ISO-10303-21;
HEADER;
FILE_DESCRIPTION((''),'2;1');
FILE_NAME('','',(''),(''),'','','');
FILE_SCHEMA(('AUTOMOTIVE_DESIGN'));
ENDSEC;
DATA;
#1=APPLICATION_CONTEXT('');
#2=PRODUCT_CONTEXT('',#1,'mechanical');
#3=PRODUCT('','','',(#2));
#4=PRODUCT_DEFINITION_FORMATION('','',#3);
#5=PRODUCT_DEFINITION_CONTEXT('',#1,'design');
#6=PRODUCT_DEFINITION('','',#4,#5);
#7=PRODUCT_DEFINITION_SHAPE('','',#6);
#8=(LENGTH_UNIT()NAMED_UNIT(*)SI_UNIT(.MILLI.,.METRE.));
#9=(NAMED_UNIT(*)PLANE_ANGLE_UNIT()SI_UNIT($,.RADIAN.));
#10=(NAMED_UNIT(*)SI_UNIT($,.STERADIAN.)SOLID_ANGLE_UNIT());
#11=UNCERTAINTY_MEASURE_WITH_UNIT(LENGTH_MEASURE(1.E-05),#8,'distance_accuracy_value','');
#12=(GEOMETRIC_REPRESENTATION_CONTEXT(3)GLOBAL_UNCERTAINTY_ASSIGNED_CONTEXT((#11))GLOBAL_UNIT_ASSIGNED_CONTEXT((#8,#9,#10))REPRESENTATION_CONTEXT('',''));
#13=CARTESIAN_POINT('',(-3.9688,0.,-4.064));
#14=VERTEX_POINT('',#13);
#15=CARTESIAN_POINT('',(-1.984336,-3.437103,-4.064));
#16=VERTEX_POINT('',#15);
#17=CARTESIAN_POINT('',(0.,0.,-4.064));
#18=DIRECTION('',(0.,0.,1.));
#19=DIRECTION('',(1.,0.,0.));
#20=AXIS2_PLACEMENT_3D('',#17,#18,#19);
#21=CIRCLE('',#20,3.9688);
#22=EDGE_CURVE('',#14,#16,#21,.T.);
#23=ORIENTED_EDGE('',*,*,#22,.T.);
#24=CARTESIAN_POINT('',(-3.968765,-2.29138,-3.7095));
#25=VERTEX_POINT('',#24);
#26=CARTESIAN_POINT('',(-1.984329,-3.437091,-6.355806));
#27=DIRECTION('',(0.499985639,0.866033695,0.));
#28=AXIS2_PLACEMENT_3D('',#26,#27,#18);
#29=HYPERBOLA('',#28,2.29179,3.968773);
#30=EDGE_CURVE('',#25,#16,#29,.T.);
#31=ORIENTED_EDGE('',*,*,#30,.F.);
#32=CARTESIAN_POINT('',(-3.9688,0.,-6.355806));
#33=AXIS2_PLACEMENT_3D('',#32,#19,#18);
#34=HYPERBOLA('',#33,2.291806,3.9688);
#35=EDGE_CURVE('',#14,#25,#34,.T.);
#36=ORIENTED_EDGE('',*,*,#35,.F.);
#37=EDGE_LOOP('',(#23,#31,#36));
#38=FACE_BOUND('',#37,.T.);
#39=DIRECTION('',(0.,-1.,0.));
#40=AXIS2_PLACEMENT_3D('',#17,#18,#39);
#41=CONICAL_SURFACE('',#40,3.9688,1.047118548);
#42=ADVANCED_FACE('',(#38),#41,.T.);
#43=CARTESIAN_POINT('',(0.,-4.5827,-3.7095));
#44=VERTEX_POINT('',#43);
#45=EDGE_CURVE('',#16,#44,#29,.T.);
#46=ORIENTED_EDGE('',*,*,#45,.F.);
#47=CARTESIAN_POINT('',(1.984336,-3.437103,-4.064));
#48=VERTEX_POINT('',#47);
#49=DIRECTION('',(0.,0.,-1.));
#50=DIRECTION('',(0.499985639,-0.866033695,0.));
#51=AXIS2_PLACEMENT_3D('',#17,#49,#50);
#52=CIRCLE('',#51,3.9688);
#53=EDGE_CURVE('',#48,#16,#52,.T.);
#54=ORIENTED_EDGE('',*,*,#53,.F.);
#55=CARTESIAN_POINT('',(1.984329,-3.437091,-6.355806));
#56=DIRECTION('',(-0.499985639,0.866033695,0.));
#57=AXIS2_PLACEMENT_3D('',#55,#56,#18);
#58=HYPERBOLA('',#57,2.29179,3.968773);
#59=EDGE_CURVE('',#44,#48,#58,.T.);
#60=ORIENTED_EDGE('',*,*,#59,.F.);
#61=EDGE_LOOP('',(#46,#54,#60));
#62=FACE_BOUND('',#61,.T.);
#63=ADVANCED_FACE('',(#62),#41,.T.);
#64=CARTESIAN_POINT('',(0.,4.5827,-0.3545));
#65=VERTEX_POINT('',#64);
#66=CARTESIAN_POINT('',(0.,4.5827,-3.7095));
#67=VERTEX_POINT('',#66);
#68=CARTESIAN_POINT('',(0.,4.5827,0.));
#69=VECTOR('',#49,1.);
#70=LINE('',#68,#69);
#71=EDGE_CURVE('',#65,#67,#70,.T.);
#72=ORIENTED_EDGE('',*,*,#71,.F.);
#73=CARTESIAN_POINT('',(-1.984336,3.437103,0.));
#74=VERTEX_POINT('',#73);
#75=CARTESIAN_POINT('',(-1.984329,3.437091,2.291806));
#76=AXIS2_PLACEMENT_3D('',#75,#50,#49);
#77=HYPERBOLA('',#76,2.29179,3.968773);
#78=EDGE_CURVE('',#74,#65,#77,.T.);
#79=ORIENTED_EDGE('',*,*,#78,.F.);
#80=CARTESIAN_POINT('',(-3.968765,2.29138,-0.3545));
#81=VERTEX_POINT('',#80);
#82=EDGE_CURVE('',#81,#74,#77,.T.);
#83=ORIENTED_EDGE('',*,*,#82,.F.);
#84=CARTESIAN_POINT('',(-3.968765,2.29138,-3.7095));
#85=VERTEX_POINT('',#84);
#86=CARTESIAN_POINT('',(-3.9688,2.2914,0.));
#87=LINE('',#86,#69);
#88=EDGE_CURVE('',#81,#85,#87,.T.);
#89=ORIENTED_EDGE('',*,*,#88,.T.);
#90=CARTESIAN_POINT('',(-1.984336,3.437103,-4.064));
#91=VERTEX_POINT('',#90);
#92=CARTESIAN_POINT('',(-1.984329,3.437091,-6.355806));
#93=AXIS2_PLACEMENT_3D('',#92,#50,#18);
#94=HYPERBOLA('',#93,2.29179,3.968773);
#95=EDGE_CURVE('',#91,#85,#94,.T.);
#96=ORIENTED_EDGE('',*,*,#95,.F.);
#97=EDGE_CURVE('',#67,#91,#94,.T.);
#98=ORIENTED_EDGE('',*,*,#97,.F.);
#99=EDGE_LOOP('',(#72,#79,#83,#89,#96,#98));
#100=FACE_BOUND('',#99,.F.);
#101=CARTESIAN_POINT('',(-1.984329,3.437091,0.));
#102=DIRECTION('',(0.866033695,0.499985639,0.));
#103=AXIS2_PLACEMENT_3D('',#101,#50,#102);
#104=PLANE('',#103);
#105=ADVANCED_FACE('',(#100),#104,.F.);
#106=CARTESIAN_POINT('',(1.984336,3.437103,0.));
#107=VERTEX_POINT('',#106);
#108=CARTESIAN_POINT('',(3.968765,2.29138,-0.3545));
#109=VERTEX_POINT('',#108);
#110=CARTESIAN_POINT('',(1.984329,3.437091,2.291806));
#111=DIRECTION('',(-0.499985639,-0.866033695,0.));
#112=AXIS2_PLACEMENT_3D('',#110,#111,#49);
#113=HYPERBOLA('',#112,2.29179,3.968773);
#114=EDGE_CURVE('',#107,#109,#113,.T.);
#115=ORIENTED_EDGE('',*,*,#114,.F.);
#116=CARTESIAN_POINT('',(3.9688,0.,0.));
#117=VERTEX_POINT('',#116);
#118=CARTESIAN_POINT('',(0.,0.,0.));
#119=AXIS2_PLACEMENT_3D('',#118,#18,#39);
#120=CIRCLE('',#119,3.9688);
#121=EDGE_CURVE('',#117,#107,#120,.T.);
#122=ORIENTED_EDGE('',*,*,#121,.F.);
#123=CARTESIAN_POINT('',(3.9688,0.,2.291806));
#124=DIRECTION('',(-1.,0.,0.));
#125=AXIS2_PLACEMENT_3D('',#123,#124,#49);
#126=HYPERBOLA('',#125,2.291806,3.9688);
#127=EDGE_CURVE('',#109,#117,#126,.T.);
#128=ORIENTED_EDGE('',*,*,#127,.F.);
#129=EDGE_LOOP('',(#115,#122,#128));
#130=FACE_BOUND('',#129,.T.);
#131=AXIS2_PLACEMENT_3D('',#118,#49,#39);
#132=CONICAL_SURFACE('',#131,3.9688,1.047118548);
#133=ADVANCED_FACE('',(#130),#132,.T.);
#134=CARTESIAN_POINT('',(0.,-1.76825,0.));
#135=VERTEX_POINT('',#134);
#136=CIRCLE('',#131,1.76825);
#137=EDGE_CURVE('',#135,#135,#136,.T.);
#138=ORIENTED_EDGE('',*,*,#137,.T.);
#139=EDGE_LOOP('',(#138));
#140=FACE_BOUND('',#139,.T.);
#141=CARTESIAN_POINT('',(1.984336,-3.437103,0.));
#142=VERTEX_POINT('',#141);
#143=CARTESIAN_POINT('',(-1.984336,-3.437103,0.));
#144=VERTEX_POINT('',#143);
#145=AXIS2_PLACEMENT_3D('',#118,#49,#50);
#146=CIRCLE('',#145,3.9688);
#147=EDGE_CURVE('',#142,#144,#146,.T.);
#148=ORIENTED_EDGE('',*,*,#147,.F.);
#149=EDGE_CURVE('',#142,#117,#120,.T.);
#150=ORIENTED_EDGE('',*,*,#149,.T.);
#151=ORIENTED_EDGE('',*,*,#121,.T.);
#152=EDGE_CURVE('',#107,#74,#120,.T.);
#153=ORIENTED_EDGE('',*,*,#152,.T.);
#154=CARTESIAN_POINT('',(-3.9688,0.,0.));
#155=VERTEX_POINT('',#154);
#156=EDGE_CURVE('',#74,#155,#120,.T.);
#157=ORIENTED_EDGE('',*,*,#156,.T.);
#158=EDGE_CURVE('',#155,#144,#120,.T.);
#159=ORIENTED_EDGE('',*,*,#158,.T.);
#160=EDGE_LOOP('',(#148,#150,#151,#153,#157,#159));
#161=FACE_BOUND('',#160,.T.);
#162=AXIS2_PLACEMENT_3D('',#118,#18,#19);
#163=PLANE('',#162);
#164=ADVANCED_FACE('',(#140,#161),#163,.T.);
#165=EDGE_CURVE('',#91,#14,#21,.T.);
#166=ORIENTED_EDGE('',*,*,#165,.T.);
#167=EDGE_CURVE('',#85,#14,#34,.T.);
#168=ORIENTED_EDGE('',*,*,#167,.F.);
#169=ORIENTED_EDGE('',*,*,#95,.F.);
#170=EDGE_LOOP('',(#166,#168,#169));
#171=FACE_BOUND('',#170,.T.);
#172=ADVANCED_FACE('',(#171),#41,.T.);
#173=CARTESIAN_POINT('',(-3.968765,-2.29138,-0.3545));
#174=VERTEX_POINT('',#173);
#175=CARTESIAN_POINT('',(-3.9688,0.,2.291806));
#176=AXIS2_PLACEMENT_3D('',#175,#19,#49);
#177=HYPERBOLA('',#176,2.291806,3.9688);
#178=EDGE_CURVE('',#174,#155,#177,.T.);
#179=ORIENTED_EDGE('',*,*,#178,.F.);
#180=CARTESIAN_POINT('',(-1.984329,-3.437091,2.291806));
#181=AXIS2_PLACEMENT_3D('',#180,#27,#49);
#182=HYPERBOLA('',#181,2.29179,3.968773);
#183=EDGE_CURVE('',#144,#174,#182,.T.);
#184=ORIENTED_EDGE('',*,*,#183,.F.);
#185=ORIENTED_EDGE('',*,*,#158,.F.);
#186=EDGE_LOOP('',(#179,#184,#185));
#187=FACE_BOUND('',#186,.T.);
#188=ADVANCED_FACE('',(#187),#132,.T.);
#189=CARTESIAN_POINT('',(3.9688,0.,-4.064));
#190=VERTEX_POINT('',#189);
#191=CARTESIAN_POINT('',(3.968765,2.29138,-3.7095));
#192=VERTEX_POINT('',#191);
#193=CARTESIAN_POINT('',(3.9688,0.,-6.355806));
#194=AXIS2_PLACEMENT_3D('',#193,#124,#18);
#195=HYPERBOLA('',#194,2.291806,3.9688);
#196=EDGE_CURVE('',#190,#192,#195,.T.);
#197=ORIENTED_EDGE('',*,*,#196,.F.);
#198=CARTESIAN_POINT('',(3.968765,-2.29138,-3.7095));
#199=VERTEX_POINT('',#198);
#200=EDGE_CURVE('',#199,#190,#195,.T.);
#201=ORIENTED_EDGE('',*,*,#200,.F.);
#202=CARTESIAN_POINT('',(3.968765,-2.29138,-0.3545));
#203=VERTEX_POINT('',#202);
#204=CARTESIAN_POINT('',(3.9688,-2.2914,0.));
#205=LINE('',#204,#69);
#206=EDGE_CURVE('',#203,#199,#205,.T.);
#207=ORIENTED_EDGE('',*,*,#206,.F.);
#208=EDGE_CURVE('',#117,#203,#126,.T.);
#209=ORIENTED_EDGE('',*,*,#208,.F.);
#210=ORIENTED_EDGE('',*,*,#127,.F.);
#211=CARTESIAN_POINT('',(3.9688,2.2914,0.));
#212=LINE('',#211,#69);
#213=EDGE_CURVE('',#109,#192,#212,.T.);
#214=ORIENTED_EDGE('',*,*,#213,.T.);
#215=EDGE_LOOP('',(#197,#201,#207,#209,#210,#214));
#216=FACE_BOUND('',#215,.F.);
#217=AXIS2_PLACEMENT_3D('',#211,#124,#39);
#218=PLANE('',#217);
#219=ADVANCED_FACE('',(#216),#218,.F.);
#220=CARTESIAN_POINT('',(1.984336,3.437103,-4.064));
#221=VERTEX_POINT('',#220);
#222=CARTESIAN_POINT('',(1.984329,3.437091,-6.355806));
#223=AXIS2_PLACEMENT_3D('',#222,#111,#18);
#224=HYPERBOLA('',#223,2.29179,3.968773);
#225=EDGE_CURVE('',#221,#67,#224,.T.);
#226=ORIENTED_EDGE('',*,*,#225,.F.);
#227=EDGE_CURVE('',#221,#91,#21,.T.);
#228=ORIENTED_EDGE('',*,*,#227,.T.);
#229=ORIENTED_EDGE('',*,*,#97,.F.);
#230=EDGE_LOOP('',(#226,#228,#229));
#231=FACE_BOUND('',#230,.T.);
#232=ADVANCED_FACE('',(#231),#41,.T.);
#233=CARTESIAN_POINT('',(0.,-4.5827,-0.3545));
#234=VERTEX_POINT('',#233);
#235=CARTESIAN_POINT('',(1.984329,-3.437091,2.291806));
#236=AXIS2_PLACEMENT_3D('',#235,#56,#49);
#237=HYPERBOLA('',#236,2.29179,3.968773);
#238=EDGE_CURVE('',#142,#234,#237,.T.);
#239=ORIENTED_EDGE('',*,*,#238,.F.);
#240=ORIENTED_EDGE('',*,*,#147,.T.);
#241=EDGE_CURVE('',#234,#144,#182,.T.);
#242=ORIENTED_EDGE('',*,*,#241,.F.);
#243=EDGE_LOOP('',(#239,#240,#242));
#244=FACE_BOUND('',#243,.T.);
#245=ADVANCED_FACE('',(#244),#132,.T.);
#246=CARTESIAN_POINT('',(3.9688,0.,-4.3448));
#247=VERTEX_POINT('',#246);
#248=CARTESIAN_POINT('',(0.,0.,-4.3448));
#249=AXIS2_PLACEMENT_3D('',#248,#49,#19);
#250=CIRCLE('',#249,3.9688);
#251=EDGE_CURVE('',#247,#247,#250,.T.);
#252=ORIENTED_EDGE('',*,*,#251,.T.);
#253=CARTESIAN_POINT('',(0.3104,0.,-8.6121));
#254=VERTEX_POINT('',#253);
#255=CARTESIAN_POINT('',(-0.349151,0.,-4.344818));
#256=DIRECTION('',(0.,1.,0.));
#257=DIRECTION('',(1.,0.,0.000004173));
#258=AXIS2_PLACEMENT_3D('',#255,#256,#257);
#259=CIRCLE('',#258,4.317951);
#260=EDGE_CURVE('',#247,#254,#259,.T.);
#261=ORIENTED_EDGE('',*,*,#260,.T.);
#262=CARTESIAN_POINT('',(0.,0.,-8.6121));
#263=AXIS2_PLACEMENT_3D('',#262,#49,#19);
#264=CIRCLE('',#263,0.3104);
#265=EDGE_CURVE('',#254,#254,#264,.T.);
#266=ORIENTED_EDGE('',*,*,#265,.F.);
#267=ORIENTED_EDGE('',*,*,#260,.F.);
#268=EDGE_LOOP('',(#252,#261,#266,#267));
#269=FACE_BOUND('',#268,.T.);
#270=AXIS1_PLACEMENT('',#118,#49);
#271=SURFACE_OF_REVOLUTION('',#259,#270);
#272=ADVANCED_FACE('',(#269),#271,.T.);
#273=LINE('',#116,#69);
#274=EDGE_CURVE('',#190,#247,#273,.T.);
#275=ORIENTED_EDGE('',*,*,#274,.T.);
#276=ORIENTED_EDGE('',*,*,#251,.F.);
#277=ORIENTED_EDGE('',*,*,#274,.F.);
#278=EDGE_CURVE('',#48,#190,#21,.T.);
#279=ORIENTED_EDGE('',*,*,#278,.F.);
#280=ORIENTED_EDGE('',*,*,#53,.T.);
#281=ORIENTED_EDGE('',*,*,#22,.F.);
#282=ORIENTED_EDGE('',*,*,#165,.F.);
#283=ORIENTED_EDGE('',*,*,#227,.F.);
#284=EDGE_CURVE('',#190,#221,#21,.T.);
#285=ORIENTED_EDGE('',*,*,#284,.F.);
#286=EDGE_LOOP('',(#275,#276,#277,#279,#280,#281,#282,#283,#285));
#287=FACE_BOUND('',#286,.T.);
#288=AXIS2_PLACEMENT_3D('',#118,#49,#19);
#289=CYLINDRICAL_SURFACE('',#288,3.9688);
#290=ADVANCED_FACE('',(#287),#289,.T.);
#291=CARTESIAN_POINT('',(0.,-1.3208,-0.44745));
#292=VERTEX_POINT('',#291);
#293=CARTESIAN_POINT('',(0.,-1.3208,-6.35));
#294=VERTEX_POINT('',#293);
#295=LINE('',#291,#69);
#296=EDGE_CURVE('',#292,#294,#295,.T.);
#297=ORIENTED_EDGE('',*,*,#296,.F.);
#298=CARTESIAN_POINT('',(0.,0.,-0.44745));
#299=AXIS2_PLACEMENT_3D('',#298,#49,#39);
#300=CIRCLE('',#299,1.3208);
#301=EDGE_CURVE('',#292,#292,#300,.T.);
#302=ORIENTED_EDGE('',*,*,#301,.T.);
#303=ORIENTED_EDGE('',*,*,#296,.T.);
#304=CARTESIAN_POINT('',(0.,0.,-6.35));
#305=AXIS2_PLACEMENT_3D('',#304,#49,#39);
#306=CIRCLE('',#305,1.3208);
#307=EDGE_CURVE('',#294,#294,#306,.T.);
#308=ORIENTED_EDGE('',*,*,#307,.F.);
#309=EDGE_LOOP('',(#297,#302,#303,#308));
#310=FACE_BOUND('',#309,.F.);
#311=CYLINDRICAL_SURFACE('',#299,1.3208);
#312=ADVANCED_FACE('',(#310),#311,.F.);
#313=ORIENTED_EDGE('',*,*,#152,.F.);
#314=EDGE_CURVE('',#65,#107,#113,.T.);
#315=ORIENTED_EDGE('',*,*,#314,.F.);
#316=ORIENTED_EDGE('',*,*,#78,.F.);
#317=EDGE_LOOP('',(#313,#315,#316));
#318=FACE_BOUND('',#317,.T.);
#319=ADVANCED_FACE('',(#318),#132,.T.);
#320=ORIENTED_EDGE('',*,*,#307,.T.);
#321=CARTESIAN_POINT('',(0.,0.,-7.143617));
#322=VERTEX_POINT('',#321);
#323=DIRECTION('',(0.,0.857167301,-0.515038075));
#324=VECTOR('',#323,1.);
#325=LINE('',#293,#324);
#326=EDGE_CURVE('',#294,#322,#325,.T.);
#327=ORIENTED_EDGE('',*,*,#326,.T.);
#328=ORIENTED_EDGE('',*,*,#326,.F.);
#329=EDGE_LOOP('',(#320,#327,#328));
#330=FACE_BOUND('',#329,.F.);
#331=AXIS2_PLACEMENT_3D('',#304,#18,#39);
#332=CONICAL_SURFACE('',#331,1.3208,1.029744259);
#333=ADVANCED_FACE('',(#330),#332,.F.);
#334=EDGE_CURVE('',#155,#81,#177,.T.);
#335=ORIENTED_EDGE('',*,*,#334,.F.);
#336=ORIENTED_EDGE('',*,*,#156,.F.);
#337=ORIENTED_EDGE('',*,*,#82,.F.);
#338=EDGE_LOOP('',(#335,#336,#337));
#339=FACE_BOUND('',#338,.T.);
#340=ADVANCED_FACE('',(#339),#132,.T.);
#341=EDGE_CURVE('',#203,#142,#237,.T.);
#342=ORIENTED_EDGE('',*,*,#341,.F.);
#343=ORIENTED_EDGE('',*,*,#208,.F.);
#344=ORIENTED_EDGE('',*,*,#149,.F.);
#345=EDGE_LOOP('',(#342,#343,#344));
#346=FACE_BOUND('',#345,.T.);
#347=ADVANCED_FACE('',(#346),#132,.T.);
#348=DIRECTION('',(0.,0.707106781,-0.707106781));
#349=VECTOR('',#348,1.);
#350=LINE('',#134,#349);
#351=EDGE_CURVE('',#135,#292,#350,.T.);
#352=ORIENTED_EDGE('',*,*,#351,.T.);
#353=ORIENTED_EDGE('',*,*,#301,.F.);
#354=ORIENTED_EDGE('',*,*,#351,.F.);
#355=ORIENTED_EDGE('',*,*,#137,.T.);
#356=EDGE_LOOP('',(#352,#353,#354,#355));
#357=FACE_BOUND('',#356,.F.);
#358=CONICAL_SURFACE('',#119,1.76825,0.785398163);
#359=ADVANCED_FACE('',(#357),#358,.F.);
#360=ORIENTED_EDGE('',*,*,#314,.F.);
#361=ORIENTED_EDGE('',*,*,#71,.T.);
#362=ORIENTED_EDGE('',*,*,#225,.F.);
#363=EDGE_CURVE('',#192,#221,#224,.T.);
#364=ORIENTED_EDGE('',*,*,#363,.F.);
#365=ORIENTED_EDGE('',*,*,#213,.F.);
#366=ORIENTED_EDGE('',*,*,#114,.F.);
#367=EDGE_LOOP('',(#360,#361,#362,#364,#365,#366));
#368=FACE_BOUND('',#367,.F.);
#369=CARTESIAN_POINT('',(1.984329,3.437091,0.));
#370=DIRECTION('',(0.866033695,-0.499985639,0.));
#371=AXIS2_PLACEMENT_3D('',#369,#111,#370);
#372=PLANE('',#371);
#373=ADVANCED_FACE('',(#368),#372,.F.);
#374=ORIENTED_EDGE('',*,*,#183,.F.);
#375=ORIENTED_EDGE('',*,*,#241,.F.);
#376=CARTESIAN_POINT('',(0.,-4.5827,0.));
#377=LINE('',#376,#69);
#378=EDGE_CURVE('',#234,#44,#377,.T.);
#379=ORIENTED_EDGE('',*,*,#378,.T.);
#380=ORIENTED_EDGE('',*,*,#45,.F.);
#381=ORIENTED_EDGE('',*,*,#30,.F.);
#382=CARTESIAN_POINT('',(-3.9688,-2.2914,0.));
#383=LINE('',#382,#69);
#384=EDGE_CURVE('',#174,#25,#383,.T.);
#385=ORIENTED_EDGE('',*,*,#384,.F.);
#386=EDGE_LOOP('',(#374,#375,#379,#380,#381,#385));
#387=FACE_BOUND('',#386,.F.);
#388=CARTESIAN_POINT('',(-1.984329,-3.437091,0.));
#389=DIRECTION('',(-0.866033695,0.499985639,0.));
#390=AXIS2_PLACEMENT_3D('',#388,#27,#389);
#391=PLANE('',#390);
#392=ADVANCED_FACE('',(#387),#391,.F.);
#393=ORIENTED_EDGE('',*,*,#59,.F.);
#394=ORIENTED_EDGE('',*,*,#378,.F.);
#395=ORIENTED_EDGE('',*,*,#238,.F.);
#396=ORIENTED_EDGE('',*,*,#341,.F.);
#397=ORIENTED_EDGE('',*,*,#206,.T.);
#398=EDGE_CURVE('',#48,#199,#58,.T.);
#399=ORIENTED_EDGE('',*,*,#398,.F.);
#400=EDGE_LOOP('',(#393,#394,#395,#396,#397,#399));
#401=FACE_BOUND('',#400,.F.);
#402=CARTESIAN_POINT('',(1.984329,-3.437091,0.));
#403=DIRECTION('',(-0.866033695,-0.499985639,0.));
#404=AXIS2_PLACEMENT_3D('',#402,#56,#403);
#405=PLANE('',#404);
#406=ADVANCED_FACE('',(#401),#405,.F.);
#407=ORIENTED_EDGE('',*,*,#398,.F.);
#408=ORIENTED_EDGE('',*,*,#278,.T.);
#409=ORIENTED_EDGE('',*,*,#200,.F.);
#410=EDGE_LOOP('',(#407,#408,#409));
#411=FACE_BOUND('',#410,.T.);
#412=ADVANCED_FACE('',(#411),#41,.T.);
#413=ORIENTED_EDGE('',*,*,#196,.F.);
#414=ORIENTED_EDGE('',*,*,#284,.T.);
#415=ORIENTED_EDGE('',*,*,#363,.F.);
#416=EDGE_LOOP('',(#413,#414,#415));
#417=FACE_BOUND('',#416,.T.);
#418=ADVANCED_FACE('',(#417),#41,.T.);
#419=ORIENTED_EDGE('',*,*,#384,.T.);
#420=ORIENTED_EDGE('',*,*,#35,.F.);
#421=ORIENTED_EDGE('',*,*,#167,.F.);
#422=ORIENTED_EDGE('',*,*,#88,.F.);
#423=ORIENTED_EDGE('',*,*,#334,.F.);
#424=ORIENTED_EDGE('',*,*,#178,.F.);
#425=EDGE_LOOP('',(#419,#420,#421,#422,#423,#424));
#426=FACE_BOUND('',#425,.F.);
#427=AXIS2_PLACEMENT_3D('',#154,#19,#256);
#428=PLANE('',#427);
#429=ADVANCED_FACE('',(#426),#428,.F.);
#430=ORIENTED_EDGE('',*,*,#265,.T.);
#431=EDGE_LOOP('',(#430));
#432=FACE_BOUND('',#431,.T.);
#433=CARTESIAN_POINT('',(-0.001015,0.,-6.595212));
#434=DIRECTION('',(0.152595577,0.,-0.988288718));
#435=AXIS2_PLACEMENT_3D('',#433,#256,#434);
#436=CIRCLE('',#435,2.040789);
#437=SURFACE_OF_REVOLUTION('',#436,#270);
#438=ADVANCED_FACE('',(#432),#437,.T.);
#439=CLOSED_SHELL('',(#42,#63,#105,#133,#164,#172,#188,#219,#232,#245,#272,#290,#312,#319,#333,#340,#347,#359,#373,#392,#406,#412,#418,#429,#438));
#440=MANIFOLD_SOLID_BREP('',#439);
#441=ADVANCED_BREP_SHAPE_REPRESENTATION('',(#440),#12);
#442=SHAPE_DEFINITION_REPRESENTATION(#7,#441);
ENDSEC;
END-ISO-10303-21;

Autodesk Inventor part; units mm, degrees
ref_plane "YZ Plane" through (0, 0, 0) normal (1, 0, 0) x (0, 1, 0)
sketch "Sketch2" plane through (0, 0, 0) normal (0, 1, 0) x (-1, 0, 0)
  line L0 (0, 0) -> (-3.9688, 0)
  line L1 (-3.9688, 0) -> (-3.9688, -4.3448)
  arc A0 (-3.9688, -4.3448) -> (-0.3104, -8.6121) centre (0.3492, -4.3448) ccw
  arc A1 (-0.3104, -8.6121) -> (0, -8.636) centre (0, -6.604) ccw
  line L2 (0, 0) -> (0, -8.636)
  line L3 (0, 0) -> (0, -8.636)
  dimension "d1" = 8.636
  dimension "d3" = 3.9688
  dimension "d5" = 0
  dimension "d7" = 2.032
  dimension "d9" = 4.318
revolve "Revolution1" add sketch "Sketch2" angle 360 about axis through (0, 0, 0) along (0, 0, -1)
sketch "Sketch7" plane through (0, 0, 0) normal (0, 0, 1) x (1, 0, 0)
  line L0 (-3.9688, -2.2914) -> (-3.9688, 2.2914)
  line L1 (-3.9688, 2.2914) -> (0, 4.5827)
  line L2 (0, 4.5827) -> (3.9688, 2.2914)
  line L3 (3.9688, 2.2914) -> (3.9688, -2.2914)
  line L4 (3.9688, -2.2914) -> (0, -4.5827)
  line L5 (0, -4.5827) -> (-3.9688, -2.2914)
  circle A0 centre (0, 0) radius 3.9688 projected
extrude "Extrusion1" add sketch "Sketch7" against normal blind 4.064 contours L0 A0 L5 | L0 L1 A0 | A0 L4 L5 | L1 L2 A0 | A0 L3 L4 | L2 L3 A0
sketch "Sketch9" plane through (0, 0, 0) normal (1, 0, 0) x (0, 1, 0)
  line L0 (-4.5827, -3.7095) -> (-4.5827, -4.064)
  line L1 (-4.5827, -4.064) -> (-3.9688, -4.064)
  line L2 (-3.9688, -4.064) -> (-4.5827, -3.7095)
  line L3 (0, -4.1349) -> (0, -3.6386) projected
  point P0 (-4.5827, -4.064)
  dimension "d53" = 7.9375
  dimension "d54" = 30
revolve "Revolution2" cut sketch "Sketch9" angle 360 about axis through (0, 0, -10) along (0, 0, 1)
sketch "Sketch11" plane through (-3.9688, -2.2914, 0) normal (0, 0, 1) x (1, 0, 0)
  line L0 (3.9687, -2.2914) -> (0, 0) projected
  line L1 (7.9375, 4.5827) -> (7.9375, 0) projected
  line L2 (3.9688, 6.8741) -> (3.9687, -2.2914) construction
  line L3 (0, 4.5827) -> (7.9375, 0) construction
  point P0 (3.9688, 2.2914)
hole "Hole1" at (0, 0, 0) direction (0, 0, -1) diameter 2.6416 depth 6.35 tip angle 118 countersink diameter 3.5365 countersink angle 90 thread size "6-32 UNC" class "2B" standard "ANSI Unified Screw Threads"
sketch "Sketch8" plane through (0, 0, 0) normal (1, 0, 0) x (0, 1, 0)
  line L0 (-4.5827, -0.3545) -> (-4.5827, 0)
  line L1 (-4.5827, 0) -> (-3.9688, 0)
  line L2 (-3.9688, 0) -> (-4.5827, -0.3545)
  line L3 (0, -0.4254) -> (0, 0.0709) projected
  point P0 (-4.5827, 0)
  dimension "d49" = 7.9375
  dimension "d50" = 30
revolve "Revolution3" cut sketch "Sketch8" angle 360 about axis through (0, 0, -10) along (0, 0, 1)
ref_plane "MSC_PF1" through (0, 0, 0) normal (1, 0, 0) x (0, 1, 0)
ref_plane "MSC_PT1" through (0, 0, 0) normal (0, 0, 1) x (1, 0, 0)
equation "\"d47\" = q"
equation "\"d76\" = PTC + NND"
equation "\"d79\" = tt"
equation "\"d1\" = ParH"
equation "\"d3\" = 0.5 * ParF"
equation "\"d7\" = r"
equation "\"d9\" = ParS"
equation "\"d49\" = ParF"
equation "\"d53\" = ParF"
equation "\"NND\" = 3.5052"
equation "\"ParF\" = 7.9375"
equation "\"g1\" = 9.1694"
equation "\"ParH\" = 8.636"
equation "\"q\" = 4.064"
equation "\"r\" = 2.032"
equation "\"ParS\" = 4.318"
equation "\"tt\" = 6.35"
equation "\"THREADDIA\" = NND"
equation "\"PTC\" = 0.03125"
properties part number "ANSI B 18.2.2 - #6-32, LC" material "Steel, Mild"
